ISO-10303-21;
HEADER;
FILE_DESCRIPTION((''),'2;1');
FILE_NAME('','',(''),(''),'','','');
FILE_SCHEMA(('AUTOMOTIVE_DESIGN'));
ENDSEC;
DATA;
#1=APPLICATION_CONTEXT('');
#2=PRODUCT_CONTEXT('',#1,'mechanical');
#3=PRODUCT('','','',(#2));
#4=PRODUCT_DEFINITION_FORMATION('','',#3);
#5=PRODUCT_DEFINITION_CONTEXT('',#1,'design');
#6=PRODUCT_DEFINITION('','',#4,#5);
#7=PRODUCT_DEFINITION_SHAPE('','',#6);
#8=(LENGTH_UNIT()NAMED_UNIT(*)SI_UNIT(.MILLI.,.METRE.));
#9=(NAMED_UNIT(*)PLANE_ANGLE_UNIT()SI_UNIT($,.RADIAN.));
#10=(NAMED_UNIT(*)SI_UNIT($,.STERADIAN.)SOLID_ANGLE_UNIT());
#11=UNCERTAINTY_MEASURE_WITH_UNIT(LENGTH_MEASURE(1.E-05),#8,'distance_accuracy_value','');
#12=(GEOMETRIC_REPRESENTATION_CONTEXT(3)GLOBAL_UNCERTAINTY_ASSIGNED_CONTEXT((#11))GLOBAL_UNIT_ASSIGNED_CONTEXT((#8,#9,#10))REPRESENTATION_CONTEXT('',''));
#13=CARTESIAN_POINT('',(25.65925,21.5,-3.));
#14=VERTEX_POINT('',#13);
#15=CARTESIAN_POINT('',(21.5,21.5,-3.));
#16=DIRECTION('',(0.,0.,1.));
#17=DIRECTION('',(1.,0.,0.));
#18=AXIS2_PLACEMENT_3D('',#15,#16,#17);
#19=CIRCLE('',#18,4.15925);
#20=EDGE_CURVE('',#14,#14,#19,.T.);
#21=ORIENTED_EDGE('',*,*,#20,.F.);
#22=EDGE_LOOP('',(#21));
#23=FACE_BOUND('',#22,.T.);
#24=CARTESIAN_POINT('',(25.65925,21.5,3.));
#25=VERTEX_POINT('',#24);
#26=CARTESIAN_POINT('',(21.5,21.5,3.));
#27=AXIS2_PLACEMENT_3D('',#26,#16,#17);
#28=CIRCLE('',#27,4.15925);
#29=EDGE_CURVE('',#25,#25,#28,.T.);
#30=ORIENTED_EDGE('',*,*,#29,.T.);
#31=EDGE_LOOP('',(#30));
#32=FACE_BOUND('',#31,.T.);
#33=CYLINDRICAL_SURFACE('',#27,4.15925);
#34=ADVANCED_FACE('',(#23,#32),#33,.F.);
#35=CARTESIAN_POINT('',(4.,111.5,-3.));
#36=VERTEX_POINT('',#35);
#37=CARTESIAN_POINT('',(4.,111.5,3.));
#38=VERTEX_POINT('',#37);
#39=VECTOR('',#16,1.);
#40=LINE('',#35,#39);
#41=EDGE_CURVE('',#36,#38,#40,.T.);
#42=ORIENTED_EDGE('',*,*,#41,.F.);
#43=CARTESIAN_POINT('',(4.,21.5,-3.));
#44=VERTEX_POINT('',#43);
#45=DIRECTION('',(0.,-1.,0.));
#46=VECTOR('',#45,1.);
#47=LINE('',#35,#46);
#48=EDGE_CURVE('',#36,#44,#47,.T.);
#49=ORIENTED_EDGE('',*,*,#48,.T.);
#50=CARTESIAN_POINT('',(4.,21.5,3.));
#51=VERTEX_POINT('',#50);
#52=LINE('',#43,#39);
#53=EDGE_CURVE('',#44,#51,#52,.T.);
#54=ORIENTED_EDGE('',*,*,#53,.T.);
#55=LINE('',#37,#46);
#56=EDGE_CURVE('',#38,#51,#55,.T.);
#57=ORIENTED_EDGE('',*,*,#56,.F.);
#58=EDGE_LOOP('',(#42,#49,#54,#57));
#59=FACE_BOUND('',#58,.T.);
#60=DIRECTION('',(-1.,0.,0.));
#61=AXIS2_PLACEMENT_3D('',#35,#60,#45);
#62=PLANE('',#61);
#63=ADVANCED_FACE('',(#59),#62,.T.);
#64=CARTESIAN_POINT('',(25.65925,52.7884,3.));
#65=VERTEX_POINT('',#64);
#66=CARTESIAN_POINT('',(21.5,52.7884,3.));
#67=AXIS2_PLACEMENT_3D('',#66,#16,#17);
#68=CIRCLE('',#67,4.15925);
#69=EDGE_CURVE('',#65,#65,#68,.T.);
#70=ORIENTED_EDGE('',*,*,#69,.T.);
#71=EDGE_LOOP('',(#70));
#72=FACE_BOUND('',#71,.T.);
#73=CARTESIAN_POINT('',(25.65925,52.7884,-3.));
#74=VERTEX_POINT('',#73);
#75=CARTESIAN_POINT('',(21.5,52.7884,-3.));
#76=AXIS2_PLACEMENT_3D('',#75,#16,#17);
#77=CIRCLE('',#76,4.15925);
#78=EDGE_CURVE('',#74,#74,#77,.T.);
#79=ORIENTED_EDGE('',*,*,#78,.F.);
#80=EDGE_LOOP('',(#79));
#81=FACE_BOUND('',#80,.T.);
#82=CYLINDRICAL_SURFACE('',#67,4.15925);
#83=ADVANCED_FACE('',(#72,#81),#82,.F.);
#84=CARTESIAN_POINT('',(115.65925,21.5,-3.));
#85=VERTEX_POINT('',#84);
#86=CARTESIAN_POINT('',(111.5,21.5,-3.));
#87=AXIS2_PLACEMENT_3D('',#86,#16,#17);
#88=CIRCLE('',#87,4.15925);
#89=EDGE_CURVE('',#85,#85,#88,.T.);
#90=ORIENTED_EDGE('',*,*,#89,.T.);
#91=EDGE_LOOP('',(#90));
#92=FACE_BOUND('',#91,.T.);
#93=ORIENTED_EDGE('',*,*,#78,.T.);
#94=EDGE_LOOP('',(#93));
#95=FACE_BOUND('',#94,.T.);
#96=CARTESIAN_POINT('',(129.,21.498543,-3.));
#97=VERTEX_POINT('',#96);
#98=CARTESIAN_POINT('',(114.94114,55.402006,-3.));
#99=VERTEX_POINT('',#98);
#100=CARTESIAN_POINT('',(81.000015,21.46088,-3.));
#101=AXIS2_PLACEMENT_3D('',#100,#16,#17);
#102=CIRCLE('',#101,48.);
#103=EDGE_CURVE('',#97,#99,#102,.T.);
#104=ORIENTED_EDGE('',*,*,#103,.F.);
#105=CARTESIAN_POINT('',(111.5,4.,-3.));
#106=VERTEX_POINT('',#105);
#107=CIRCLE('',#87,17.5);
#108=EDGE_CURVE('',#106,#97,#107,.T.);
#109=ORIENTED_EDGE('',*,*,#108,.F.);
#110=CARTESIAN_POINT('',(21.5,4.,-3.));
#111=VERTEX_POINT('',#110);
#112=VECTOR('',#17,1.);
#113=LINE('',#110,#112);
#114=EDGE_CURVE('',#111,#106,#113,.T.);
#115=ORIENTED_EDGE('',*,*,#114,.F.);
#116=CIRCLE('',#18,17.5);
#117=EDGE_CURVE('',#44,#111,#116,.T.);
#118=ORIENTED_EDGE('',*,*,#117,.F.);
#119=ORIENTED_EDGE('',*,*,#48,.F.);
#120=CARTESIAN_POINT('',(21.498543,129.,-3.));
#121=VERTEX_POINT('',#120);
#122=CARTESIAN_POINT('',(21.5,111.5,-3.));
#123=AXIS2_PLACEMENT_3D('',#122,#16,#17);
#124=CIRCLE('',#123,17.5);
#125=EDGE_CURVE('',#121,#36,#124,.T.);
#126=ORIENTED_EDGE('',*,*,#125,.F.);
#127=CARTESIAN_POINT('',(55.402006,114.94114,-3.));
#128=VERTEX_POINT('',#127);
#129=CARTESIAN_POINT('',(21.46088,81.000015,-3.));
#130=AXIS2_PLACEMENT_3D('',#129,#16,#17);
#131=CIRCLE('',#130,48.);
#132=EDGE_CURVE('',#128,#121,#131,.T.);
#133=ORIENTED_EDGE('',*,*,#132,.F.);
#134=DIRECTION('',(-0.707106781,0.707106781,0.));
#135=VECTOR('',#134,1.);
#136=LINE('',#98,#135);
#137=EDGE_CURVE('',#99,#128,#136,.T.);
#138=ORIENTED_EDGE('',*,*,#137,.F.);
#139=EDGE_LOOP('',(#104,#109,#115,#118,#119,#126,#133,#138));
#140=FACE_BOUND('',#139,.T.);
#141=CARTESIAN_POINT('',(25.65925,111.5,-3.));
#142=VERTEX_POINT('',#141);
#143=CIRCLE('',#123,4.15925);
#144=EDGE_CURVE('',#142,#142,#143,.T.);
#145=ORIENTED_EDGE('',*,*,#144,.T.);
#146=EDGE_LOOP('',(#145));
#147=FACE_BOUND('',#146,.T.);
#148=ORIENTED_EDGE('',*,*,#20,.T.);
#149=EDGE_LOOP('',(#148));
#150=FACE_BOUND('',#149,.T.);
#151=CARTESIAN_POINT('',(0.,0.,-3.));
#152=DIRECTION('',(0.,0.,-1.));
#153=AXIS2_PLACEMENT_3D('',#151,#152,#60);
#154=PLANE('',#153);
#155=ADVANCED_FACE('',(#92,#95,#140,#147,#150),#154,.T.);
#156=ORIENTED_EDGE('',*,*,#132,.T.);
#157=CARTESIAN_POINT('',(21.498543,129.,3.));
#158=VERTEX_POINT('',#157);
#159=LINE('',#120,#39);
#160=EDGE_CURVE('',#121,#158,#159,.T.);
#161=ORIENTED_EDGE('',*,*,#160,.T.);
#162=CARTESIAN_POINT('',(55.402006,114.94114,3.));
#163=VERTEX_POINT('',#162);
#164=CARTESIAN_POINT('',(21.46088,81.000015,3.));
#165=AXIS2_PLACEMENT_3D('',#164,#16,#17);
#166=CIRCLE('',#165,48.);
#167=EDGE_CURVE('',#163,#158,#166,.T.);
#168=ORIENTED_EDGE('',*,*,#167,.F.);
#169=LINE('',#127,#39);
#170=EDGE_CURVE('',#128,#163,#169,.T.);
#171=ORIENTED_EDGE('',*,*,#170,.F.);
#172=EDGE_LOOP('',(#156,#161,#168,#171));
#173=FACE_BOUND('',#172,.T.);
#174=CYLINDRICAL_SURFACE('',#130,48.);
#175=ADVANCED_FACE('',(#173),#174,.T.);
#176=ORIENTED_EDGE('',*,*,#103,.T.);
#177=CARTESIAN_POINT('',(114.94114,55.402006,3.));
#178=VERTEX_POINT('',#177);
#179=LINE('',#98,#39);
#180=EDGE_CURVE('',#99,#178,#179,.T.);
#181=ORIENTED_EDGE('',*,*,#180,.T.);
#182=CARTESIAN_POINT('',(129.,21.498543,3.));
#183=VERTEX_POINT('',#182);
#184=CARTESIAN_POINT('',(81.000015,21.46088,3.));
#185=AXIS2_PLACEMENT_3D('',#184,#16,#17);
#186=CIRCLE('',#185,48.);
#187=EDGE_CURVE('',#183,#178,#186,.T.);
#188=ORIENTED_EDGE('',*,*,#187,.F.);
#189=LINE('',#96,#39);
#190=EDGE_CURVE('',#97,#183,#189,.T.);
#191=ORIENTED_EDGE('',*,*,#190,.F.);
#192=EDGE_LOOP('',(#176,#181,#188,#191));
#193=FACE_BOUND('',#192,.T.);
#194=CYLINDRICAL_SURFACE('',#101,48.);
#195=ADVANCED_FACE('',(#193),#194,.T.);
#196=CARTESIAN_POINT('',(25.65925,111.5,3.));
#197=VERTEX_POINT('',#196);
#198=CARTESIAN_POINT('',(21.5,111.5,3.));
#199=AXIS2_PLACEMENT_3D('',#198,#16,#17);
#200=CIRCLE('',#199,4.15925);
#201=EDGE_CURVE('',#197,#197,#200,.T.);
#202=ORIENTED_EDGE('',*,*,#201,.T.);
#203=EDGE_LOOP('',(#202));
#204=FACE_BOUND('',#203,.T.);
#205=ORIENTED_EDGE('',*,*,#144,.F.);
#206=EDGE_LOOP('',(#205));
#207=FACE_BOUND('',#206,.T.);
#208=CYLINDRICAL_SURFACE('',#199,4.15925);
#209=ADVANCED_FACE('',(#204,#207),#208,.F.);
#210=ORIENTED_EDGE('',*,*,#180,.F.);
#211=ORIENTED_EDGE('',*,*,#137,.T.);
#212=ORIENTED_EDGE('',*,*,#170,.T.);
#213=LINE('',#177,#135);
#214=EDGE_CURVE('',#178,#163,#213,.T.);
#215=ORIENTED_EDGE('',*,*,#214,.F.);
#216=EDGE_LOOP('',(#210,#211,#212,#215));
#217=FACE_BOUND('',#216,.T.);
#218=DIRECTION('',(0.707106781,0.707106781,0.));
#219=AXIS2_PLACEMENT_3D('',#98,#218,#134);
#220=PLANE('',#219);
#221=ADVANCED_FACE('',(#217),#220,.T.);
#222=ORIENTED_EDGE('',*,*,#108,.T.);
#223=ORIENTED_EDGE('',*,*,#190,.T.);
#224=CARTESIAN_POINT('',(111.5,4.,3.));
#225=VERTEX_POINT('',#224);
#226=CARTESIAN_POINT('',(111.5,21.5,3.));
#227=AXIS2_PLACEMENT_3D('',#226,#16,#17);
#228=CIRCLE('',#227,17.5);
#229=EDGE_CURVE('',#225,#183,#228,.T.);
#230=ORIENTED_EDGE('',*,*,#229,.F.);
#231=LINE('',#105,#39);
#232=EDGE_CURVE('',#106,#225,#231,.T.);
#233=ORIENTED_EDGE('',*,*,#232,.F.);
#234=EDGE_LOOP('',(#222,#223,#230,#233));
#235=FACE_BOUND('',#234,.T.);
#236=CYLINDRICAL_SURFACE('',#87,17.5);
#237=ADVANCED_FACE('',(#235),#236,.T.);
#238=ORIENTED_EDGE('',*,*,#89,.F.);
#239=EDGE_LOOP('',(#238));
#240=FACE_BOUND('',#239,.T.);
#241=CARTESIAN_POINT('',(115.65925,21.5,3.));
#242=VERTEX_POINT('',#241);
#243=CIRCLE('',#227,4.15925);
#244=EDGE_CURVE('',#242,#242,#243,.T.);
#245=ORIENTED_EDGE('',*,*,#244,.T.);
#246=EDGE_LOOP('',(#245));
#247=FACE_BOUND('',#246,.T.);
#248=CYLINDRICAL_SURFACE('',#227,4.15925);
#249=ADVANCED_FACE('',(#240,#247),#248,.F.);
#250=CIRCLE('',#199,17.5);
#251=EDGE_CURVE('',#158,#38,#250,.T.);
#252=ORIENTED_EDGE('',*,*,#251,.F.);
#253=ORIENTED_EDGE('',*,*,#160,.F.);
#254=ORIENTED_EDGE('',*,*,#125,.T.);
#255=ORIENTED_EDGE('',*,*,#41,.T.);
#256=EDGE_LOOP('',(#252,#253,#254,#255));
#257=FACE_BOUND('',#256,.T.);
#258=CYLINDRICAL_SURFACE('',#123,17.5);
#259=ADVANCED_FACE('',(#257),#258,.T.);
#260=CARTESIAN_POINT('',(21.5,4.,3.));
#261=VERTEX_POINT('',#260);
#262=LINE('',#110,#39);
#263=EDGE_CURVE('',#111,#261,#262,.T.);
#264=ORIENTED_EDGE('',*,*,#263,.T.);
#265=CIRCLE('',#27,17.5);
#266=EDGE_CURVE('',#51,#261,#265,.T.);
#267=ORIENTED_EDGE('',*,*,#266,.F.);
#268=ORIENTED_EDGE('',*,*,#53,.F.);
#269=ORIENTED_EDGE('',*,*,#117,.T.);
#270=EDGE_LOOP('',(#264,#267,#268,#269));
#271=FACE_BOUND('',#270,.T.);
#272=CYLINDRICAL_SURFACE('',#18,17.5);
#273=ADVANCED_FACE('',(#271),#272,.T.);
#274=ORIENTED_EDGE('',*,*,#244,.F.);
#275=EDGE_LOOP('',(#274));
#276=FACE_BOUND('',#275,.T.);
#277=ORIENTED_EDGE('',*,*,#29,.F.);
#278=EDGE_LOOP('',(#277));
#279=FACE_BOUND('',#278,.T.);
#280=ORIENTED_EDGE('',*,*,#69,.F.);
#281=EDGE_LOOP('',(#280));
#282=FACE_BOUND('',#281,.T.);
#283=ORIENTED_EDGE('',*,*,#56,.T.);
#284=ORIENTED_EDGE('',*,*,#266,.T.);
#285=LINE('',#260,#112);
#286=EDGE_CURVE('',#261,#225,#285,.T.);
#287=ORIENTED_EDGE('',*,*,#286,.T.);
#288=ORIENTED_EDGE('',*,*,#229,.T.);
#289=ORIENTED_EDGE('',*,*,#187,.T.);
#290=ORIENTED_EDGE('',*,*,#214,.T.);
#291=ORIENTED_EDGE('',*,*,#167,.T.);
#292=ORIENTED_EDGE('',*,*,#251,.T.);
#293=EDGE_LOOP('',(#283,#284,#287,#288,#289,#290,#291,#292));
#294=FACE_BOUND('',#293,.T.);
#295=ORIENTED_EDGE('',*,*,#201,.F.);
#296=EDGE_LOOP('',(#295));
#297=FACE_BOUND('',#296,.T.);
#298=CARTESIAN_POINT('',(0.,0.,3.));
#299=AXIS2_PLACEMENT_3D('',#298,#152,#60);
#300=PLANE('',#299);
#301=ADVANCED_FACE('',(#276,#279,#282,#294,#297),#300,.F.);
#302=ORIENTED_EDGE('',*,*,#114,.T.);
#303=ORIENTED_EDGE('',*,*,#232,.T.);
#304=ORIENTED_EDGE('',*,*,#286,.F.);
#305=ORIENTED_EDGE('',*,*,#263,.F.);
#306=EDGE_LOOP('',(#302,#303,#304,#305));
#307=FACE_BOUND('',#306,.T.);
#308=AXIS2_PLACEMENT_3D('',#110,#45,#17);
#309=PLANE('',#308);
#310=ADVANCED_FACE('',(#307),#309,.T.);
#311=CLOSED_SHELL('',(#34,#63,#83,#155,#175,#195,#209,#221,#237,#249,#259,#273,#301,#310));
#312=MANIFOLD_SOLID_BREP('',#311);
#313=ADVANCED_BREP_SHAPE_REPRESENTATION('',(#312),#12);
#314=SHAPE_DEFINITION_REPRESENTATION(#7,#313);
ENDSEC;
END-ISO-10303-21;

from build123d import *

# Parameters (mm, degrees)
BOSS_EXTRUDE1_DEPTH      = 3
FILLET1_R                = 21.5
FILLET2_R                = 52
CUT_EXTRUDE1_DEPTH       = 189.18607812481773
F_5_16_CLEARANCE_HOLE1_D = 8.3185


with BuildPart() as part:
    # Sketch1 → Boss-Extrude1 (new, symmetric)
    with BuildSketch(Plane.XY):
        Polygon((0, 0), (0, 133), (42.999999999999986, 133), (133, 42.99999999999999), (133, 9.06e-15), align=None)
    extrude(amount=BOSS_EXTRUDE1_DEPTH, both=True)

    # Fillet1
    fillet1_edges = [part.edges().sort_by_distance(p)[0] for p in [
        (0, 0, 0),
        (0, 133, 0),
        (133, 9.06e-15, 0),
    ]]
    fillet(fillet1_edges, radius=FILLET1_R)

    # Fillet2
    # the kernel refuses this fillet: 52 mm, written as the material it takes off along each edge
    with BuildSketch(Plane(origin=(133, 43, -56.84767436170304), x_dir=(-0.7071067811865476, 0.7071067811865476, 0), z_dir=(0, 0, 1))) as fillet2_piece_1:
        with BuildLine():
            CenterArc((21.539069744681207, 52.00000000000001), FILLET2_R, 225.07350833515432, 44.926491664845685)
            Line((-15.183278672480162, 15.183303696167892), (-18.855513514196304, 11.501634065784673))
            ThreePointArc((-18.855513514196304, 11.501634065784673), (-18.87975105768081, 11.52584053334073), (-3.6769552621700394, -3.6769552621700394))
            Line((-3.6769552621700394, -3.6769552621700394), (-4.9e-15, -5.200000000000005))
            Line((-4.9e-15, -5.200000000000005), (21.539069744681218, -5.199999999999996))
            Line((21.539069744681218, -5.199999999999996), (21.539069744681214, 4.7e-16))
        make_face()
    extrude(amount=113.69534872340608, mode=Mode.SUBTRACT)
    with BuildSketch(Plane(origin=(42.999999999999986, 133, 56.847674361702985), x_dir=(-0.9999999999996605, -8.240534738615283e-07, 0), z_dir=(0, 0, -1))) as fillet2_piece_2:
        with BuildLine():
            CenterArc((21.539173195539043, -51.9999571492017), FILLET2_R, 90.07355554994047, 44.926491664845685)
            Line((-15.230409726226513, -15.230434827591285), (-18.90736801840307, -11.55348259543025))
            Line((-18.90736801840307, -11.55348259543025), (-3.676958292176556, 3.6769522321610486))
            Line((-3.676958292176556, 3.6769522321610486), (-4.28507806408e-06, 5.199999999998223))
            ThreePointArc((-4.28507806408e-06, 5.199999999998223), (21.499995714914625, 5.200017717147912), (21.46574062621809, 5.1999957149201785))
            Line((21.46574062621809, 5.1999957149201785), (21.472416314338172, 0))
        make_face()
    extrude(amount=113.69534872340597, mode=Mode.SUBTRACT)

    # Sketch3 → Cut-Extrude1 (cut, through all)
    with BuildSketch(Plane.XY.offset(3)):
        with BuildLine():
            Line((117.76956733680983, 58.23043266319015), (58.23043266319017, 117.76956733680981))
            ThreePointArc((58.23043266319017, 117.76956733680981), (41.3784881824358, 129.03426172642116), (21.499999999999996, 133))
            ThreePointArc((21.499999999999996, 133), (6.2972042044892405, 126.70279579551078), (3.47e-15, 111.50000000000001))
            Line((3.47e-15, 111.50000000000001), (0, 21.5))
            ThreePointArc((0, 21.5), (6.297204204489223, 6.297204204489235), (21.49999999999999, 3.47e-15))
            Line((21.49999999999999, 3.47e-15), (111.50000000000001, 1.041e-14))
            ThreePointArc((111.50000000000001, 1.041e-14), (126.70279579551078, 6.297204204489239), (133, 21.500000000000007))
            ThreePointArc((133, 21.500000000000007), (129.03426172642114, 41.37848818243579), (117.76956733680983, 58.23043266319015))
        make_face()
        with BuildLine():
            Line((114.94114021206362, 55.40200553844396), (55.402005538443966, 114.94114021206363))
            ThreePointArc((55.402005538443966, 114.94114021206363), (39.84708125964561, 125.33902242576387), (21.49854269401705, 128.9999999393217))
            ThreePointArc((21.49854269401705, 128.9999999393217), (9.12511610449009, 123.87385342456624), (4.0000000000000036, 111.50000000000001))
            Line((4.0000000000000036, 111.50000000000001), (4, 21.500000000000004))
            ThreePointArc((4, 21.500000000000004), (9.125631329235414, 9.125631329235425), (21.499999999999996, 4.0000000000000036))
            Line((21.499999999999996, 4.0000000000000036), (111.50000000000001, 4.000000000000011))
            ThreePointArc((111.50000000000001, 4.000000000000011), (123.8738534245646, 9.125116104488455), (128.9999999393217, 21.49854269401244))
            ThreePointArc((128.9999999393217, 21.49854269401244), (125.33902242576474, 39.847081259643474), (114.94114021206362, 55.40200553844396))
        make_face(mode=Mode.SUBTRACT)
    extrude(amount=-CUT_EXTRUDE1_DEPTH, mode=Mode.SUBTRACT)


with BuildPart() as cut_extrude1_kept_piece:
    # of the separate pieces the step leaves, the one the design keeps (cut_extrude1_pieces_kept)
    add(part.part.solids().sort_by_distance((128.999999939, 21.498542694, -3))[0])

    # 5/16 Clearance Hole1 (through all)
    with Locations(Plane.XY.offset(3)):
        with Locations((21.5, 111.5), (21.5, 52.7884), (21.5, 21.5), (111.5, 21.5)):
            Hole(F_5_16_CLEARANCE_HOLE1_D / 2)


solid = cut_extrude1_kept_piece.part
